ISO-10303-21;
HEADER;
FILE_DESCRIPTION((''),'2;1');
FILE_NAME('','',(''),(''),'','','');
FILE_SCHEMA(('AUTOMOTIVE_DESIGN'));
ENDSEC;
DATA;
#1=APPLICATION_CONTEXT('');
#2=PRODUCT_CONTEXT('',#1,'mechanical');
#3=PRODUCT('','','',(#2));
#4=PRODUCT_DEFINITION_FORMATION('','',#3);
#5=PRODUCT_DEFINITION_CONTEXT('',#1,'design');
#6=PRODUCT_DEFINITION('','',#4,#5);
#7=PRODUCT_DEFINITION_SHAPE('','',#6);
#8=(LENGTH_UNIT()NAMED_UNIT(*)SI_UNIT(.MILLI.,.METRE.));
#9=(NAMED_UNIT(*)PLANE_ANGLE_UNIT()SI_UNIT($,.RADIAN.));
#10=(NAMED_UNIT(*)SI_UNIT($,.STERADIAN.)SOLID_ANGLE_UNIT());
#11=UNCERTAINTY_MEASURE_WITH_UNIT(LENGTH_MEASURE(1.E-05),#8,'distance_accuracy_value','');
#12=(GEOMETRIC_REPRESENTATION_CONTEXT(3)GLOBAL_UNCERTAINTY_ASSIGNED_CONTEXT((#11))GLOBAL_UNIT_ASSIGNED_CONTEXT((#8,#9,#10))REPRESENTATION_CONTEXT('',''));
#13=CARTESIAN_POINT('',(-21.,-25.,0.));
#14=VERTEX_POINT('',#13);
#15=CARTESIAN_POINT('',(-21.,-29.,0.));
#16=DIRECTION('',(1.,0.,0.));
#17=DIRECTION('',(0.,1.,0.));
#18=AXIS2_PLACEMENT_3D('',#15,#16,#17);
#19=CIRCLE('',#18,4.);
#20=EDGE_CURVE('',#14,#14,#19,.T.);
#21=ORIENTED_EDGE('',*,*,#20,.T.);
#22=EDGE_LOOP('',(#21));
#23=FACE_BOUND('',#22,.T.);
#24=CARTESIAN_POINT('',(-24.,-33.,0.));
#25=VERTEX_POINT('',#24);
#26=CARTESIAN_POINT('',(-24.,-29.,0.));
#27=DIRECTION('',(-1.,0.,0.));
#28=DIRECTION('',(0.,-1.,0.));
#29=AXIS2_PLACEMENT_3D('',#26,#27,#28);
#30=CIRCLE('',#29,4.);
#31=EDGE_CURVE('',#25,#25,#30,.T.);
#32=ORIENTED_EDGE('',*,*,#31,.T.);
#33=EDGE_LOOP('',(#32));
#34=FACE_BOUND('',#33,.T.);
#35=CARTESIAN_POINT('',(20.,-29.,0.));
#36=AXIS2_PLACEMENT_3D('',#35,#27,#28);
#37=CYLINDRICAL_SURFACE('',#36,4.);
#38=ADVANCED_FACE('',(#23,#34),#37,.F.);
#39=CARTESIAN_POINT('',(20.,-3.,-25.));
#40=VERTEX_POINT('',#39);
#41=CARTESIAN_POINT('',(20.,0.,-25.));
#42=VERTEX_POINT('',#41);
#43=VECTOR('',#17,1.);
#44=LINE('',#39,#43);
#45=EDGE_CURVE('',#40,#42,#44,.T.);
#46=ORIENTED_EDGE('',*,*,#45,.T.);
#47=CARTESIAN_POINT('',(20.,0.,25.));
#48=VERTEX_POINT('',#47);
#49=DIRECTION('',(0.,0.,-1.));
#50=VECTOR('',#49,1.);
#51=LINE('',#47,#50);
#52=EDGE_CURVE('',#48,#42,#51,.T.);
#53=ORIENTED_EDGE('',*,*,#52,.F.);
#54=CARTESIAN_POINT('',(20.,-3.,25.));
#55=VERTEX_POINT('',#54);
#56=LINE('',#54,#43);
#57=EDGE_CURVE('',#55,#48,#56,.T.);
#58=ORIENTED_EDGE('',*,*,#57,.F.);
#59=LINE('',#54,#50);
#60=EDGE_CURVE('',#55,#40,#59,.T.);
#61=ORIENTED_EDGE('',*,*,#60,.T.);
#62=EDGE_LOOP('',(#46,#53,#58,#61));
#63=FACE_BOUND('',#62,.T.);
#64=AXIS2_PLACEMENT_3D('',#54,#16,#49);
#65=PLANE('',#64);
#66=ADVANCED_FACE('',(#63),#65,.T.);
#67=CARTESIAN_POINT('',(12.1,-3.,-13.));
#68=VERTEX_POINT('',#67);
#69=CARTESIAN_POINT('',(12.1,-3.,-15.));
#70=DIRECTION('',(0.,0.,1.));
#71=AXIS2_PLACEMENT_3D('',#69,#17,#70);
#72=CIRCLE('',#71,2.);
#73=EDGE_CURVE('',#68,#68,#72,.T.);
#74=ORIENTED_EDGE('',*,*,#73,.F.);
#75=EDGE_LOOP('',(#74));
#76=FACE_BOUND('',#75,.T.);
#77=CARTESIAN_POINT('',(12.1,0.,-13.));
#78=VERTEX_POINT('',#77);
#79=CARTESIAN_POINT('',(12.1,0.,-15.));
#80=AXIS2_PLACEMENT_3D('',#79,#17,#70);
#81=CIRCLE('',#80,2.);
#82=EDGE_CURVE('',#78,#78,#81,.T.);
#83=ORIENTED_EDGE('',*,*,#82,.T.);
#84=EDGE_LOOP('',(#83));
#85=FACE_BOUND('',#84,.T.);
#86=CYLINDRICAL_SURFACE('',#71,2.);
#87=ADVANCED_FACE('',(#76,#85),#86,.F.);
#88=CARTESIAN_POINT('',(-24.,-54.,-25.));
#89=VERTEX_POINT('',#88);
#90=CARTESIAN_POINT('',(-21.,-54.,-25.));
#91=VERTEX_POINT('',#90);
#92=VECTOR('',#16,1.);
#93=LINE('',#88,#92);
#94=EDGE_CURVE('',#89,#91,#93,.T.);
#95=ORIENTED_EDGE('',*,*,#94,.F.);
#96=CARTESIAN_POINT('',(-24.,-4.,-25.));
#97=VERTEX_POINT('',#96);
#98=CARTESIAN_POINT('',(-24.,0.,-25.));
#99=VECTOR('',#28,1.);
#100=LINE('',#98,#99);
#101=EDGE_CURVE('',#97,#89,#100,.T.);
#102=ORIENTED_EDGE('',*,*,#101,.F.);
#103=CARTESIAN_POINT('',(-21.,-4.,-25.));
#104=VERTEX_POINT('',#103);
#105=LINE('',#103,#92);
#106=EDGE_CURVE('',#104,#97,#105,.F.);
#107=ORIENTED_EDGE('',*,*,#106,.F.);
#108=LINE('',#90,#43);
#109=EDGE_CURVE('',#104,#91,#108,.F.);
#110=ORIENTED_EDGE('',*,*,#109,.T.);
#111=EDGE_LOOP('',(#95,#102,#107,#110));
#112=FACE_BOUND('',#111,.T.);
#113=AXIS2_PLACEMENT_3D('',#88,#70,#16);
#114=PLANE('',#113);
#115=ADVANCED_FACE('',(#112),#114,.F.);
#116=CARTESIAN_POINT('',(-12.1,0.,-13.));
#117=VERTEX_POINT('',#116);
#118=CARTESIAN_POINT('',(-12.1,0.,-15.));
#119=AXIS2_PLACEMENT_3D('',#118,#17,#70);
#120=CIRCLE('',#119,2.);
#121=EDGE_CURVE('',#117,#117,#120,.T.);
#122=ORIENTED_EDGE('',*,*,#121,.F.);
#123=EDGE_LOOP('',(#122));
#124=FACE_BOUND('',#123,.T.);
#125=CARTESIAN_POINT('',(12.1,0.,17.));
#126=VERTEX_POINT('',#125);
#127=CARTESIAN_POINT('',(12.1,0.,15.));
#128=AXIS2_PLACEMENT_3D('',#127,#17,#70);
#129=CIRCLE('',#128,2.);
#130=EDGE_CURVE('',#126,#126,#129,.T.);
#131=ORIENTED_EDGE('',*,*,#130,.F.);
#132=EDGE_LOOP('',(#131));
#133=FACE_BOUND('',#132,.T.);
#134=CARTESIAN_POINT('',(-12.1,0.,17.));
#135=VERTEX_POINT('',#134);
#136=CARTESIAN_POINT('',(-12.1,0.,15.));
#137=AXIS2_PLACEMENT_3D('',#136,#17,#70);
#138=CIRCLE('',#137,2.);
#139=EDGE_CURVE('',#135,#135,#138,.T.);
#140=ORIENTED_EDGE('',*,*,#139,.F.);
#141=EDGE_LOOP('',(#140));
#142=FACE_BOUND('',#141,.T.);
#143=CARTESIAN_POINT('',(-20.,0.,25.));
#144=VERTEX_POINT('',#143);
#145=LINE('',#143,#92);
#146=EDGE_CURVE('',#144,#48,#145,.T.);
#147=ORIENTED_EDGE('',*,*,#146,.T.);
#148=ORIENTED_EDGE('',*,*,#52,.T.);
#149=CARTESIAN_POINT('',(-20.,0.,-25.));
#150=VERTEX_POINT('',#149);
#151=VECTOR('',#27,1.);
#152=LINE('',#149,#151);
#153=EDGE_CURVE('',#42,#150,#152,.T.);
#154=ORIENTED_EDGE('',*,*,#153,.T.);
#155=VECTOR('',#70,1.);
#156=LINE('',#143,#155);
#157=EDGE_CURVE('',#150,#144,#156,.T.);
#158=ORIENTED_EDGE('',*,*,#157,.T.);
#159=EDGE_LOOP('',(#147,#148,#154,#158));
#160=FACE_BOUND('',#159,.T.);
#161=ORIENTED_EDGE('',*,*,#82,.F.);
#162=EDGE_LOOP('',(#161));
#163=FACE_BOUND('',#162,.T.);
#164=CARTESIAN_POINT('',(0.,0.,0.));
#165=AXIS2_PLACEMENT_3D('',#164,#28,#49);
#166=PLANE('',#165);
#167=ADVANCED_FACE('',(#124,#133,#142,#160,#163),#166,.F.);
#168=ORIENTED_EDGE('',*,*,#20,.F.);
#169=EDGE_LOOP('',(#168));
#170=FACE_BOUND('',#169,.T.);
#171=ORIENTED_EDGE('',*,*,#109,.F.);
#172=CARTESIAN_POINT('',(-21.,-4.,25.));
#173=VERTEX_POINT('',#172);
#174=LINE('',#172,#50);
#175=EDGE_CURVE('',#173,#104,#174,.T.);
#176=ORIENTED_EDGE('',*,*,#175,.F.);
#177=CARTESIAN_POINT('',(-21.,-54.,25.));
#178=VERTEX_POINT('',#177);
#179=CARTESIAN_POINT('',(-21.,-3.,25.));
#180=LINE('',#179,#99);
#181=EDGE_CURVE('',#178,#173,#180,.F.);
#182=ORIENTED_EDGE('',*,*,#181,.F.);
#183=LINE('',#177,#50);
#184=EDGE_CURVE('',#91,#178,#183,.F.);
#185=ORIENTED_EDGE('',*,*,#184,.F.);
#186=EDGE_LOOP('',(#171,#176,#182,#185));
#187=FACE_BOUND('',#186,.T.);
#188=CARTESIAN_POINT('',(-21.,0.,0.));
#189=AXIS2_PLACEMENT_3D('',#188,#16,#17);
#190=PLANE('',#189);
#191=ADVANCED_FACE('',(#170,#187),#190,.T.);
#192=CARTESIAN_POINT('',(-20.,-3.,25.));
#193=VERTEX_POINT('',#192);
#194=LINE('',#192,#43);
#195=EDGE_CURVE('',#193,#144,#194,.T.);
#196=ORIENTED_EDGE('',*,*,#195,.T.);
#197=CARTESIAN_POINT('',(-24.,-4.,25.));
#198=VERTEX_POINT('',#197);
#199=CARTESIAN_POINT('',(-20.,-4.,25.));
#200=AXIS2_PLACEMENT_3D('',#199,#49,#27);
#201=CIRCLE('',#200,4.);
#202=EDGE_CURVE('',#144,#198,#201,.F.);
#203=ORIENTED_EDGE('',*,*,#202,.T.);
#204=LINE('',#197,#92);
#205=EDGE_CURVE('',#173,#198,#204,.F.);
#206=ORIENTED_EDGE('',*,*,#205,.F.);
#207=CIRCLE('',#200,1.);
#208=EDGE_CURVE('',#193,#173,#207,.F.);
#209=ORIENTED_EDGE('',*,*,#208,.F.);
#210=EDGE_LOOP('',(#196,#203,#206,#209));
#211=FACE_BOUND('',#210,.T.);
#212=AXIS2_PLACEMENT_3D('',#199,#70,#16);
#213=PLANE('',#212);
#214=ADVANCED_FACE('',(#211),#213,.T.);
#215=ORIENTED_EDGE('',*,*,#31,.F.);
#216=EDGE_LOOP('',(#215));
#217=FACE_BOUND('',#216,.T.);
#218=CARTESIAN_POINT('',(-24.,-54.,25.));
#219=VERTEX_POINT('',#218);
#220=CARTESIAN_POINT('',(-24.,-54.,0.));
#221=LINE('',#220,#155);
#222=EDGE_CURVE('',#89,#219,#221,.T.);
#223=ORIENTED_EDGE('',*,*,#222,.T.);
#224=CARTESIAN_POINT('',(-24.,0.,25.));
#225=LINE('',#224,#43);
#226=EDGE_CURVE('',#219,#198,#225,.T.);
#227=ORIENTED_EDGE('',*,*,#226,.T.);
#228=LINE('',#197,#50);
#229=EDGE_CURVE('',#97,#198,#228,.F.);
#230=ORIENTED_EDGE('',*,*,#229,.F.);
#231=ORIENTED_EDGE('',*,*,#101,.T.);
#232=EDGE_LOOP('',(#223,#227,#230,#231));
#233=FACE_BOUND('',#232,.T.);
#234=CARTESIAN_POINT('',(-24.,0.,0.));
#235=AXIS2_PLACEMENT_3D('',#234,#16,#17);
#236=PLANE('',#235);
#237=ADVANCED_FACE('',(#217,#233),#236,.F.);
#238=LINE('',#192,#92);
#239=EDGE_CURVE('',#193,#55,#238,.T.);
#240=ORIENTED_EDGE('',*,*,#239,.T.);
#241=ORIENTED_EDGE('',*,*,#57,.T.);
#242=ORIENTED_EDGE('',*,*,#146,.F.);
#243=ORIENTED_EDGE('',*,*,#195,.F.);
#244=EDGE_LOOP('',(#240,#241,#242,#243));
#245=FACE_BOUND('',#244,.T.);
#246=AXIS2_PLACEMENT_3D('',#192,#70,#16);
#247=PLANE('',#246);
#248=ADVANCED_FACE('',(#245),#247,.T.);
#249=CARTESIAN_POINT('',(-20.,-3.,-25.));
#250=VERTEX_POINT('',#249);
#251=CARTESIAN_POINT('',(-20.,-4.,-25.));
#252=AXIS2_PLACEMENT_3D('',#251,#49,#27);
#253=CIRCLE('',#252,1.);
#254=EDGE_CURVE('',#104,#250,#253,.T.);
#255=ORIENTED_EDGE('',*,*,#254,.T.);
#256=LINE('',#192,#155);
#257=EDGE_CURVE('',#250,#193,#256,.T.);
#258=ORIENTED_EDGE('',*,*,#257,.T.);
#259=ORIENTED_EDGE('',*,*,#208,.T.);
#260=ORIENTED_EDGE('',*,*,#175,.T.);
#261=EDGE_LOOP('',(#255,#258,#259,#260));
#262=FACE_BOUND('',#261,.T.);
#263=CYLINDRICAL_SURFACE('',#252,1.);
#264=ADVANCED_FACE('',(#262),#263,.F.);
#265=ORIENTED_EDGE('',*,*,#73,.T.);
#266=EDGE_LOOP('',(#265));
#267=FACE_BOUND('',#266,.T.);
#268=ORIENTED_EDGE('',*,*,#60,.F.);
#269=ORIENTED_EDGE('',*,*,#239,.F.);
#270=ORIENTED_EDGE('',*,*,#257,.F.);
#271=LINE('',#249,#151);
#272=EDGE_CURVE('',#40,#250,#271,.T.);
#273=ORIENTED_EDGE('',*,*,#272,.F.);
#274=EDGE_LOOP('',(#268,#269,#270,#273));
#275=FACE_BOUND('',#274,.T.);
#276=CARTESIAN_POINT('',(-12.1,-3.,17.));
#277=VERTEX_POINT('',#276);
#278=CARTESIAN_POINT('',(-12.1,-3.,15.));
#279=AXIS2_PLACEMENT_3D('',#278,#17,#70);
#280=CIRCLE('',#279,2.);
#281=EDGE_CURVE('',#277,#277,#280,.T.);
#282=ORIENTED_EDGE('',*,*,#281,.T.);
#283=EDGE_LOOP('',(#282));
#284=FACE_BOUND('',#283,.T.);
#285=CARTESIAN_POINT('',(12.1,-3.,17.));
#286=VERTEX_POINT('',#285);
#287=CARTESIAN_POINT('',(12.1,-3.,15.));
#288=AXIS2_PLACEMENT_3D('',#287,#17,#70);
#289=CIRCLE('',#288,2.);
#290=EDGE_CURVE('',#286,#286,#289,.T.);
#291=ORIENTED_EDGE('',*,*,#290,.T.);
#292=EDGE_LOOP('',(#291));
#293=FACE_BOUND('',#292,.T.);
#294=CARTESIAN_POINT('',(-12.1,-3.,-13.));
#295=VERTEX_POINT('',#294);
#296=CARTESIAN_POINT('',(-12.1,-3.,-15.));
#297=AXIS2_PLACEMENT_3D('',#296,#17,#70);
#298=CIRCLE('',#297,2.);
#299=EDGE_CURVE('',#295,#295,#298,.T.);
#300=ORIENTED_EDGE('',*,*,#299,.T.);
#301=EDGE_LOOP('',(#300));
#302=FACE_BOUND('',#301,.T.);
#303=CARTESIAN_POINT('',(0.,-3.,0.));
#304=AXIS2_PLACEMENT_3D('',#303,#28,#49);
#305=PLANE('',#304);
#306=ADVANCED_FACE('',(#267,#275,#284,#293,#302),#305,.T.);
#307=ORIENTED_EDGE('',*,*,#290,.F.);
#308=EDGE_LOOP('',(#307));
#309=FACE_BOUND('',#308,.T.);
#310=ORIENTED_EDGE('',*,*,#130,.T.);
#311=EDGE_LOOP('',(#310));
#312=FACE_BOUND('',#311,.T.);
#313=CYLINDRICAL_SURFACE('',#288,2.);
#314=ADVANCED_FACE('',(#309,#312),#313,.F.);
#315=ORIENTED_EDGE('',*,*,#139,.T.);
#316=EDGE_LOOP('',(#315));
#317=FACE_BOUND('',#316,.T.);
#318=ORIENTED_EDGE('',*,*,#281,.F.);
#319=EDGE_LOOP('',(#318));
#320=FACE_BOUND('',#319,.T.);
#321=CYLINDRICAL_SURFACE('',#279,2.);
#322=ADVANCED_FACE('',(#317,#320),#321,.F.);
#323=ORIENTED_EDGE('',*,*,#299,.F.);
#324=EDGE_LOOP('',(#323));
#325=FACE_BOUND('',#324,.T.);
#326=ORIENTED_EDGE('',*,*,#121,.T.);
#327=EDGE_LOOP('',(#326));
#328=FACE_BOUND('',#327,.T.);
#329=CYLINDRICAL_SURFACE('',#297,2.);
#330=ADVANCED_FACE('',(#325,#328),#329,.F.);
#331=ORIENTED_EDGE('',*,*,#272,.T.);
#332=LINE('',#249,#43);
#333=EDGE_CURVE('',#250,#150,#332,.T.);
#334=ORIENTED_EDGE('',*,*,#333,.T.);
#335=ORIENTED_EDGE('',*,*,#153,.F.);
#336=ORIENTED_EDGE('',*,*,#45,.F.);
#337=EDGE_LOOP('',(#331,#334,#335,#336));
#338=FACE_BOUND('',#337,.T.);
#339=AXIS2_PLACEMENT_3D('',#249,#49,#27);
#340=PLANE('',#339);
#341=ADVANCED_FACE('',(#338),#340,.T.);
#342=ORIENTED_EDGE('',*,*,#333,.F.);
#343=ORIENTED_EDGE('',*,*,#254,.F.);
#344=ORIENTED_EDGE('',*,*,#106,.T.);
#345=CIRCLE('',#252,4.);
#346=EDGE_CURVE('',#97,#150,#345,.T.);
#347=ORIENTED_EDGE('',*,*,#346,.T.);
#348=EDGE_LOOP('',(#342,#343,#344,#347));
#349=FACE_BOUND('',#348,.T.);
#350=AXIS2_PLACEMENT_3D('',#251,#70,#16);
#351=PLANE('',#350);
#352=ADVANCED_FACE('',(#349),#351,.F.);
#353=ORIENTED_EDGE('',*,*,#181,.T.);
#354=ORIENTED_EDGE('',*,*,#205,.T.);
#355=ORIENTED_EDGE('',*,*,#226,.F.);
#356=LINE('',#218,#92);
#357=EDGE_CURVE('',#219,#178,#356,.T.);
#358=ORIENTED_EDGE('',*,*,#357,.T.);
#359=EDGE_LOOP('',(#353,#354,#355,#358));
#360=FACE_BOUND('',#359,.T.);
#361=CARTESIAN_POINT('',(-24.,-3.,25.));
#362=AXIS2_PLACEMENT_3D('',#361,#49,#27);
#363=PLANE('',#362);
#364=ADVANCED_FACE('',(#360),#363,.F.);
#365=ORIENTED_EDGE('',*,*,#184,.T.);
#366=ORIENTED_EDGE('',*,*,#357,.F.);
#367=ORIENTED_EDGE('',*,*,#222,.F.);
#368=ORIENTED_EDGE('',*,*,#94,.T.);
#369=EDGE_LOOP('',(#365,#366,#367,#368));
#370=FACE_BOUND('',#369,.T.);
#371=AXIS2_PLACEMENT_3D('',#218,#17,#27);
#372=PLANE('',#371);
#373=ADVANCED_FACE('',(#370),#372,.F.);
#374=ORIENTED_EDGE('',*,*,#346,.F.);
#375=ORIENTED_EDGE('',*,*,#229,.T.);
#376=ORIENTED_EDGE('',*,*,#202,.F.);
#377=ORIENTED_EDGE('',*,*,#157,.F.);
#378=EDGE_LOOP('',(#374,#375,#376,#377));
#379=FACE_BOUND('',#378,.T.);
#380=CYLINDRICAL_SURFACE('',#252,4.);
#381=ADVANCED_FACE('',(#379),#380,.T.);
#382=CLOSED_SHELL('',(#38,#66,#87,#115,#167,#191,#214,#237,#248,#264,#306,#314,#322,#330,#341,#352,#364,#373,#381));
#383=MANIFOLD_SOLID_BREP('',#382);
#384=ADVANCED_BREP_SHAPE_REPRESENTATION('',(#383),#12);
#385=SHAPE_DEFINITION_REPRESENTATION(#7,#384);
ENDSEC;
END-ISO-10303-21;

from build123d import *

# Parameters (mm, degrees)
SKETCH_1_W             = 40
SKETCH_1_H             = 50
SKETCH_1_R             = 2
SM_BASE_FLANGE_1_DEPTH = 3
SM_EDGE_FLANGE_1_DEPTH = 50
SKETCH_12_R            = 4
CUT_EXTRUDE_1_DEPTH    = 75.006756448


# Sheet-metal steps are written as plain solids
with BuildPart() as part:
    # Sketch 1 → 基体-法兰1 (new body)
    with BuildSketch(Plane(origin=(0, 0, 0), x_dir=(1, 0, 0), z_dir=(0, 1, 0))):
        Rectangle(SKETCH_1_W, SKETCH_1_H)
        with Locations(Location((12.1, 15, 0), (0, 0, 270))):
            Circle(SKETCH_1_R, mode=Mode.SUBTRACT)
        with Locations(Location((-12.1, -15, 0), (0, 0, 270))):
            Circle(SKETCH_1_R, mode=Mode.SUBTRACT)
        with Locations(Location((-12.1, 15, 0), (0, 0, 270))):
            Circle(SKETCH_1_R, mode=Mode.SUBTRACT)
        with Locations(Location((12.1, -15, 0), (0, 0, 270))):
            Circle(SKETCH_1_R, mode=Mode.SUBTRACT)
    extrude(amount=-SM_BASE_FLANGE_1_DEPTH)

    # 边线-法兰1 section (across the edge) → 边线-法兰1 (add)
    with BuildSketch(Plane(origin=(-21, -3, 25), x_dir=(1, 0, 0), z_dir=(0, 0, -1))):
        with BuildLine():
            Line((-3, 1), (-3, 51))
            Line((-3, 51), (0, 51))
            Line((0, 51), (0, 1))
            ThreePointArc((0, 1), (0.292893219, 0.292893219), (1, 0))
            Line((1, 0), (1, -3))
            ThreePointArc((1, -3), (-1.828427125, -1.828427125), (-3, 1))
        make_face()
    extrude(amount=SM_EDGE_FLANGE_1_DEPTH)

    # 草图12 → 切除-拉伸1 (cut, through all)
    with BuildSketch(Plane.ZY.offset(24)):
        with Locations(Location((0, -29, 0), (0, 0, 270))):
            Circle(SKETCH_12_R)
    extrude(amount=-CUT_EXTRUDE_1_DEPTH, mode=Mode.SUBTRACT)


solid = part.part
